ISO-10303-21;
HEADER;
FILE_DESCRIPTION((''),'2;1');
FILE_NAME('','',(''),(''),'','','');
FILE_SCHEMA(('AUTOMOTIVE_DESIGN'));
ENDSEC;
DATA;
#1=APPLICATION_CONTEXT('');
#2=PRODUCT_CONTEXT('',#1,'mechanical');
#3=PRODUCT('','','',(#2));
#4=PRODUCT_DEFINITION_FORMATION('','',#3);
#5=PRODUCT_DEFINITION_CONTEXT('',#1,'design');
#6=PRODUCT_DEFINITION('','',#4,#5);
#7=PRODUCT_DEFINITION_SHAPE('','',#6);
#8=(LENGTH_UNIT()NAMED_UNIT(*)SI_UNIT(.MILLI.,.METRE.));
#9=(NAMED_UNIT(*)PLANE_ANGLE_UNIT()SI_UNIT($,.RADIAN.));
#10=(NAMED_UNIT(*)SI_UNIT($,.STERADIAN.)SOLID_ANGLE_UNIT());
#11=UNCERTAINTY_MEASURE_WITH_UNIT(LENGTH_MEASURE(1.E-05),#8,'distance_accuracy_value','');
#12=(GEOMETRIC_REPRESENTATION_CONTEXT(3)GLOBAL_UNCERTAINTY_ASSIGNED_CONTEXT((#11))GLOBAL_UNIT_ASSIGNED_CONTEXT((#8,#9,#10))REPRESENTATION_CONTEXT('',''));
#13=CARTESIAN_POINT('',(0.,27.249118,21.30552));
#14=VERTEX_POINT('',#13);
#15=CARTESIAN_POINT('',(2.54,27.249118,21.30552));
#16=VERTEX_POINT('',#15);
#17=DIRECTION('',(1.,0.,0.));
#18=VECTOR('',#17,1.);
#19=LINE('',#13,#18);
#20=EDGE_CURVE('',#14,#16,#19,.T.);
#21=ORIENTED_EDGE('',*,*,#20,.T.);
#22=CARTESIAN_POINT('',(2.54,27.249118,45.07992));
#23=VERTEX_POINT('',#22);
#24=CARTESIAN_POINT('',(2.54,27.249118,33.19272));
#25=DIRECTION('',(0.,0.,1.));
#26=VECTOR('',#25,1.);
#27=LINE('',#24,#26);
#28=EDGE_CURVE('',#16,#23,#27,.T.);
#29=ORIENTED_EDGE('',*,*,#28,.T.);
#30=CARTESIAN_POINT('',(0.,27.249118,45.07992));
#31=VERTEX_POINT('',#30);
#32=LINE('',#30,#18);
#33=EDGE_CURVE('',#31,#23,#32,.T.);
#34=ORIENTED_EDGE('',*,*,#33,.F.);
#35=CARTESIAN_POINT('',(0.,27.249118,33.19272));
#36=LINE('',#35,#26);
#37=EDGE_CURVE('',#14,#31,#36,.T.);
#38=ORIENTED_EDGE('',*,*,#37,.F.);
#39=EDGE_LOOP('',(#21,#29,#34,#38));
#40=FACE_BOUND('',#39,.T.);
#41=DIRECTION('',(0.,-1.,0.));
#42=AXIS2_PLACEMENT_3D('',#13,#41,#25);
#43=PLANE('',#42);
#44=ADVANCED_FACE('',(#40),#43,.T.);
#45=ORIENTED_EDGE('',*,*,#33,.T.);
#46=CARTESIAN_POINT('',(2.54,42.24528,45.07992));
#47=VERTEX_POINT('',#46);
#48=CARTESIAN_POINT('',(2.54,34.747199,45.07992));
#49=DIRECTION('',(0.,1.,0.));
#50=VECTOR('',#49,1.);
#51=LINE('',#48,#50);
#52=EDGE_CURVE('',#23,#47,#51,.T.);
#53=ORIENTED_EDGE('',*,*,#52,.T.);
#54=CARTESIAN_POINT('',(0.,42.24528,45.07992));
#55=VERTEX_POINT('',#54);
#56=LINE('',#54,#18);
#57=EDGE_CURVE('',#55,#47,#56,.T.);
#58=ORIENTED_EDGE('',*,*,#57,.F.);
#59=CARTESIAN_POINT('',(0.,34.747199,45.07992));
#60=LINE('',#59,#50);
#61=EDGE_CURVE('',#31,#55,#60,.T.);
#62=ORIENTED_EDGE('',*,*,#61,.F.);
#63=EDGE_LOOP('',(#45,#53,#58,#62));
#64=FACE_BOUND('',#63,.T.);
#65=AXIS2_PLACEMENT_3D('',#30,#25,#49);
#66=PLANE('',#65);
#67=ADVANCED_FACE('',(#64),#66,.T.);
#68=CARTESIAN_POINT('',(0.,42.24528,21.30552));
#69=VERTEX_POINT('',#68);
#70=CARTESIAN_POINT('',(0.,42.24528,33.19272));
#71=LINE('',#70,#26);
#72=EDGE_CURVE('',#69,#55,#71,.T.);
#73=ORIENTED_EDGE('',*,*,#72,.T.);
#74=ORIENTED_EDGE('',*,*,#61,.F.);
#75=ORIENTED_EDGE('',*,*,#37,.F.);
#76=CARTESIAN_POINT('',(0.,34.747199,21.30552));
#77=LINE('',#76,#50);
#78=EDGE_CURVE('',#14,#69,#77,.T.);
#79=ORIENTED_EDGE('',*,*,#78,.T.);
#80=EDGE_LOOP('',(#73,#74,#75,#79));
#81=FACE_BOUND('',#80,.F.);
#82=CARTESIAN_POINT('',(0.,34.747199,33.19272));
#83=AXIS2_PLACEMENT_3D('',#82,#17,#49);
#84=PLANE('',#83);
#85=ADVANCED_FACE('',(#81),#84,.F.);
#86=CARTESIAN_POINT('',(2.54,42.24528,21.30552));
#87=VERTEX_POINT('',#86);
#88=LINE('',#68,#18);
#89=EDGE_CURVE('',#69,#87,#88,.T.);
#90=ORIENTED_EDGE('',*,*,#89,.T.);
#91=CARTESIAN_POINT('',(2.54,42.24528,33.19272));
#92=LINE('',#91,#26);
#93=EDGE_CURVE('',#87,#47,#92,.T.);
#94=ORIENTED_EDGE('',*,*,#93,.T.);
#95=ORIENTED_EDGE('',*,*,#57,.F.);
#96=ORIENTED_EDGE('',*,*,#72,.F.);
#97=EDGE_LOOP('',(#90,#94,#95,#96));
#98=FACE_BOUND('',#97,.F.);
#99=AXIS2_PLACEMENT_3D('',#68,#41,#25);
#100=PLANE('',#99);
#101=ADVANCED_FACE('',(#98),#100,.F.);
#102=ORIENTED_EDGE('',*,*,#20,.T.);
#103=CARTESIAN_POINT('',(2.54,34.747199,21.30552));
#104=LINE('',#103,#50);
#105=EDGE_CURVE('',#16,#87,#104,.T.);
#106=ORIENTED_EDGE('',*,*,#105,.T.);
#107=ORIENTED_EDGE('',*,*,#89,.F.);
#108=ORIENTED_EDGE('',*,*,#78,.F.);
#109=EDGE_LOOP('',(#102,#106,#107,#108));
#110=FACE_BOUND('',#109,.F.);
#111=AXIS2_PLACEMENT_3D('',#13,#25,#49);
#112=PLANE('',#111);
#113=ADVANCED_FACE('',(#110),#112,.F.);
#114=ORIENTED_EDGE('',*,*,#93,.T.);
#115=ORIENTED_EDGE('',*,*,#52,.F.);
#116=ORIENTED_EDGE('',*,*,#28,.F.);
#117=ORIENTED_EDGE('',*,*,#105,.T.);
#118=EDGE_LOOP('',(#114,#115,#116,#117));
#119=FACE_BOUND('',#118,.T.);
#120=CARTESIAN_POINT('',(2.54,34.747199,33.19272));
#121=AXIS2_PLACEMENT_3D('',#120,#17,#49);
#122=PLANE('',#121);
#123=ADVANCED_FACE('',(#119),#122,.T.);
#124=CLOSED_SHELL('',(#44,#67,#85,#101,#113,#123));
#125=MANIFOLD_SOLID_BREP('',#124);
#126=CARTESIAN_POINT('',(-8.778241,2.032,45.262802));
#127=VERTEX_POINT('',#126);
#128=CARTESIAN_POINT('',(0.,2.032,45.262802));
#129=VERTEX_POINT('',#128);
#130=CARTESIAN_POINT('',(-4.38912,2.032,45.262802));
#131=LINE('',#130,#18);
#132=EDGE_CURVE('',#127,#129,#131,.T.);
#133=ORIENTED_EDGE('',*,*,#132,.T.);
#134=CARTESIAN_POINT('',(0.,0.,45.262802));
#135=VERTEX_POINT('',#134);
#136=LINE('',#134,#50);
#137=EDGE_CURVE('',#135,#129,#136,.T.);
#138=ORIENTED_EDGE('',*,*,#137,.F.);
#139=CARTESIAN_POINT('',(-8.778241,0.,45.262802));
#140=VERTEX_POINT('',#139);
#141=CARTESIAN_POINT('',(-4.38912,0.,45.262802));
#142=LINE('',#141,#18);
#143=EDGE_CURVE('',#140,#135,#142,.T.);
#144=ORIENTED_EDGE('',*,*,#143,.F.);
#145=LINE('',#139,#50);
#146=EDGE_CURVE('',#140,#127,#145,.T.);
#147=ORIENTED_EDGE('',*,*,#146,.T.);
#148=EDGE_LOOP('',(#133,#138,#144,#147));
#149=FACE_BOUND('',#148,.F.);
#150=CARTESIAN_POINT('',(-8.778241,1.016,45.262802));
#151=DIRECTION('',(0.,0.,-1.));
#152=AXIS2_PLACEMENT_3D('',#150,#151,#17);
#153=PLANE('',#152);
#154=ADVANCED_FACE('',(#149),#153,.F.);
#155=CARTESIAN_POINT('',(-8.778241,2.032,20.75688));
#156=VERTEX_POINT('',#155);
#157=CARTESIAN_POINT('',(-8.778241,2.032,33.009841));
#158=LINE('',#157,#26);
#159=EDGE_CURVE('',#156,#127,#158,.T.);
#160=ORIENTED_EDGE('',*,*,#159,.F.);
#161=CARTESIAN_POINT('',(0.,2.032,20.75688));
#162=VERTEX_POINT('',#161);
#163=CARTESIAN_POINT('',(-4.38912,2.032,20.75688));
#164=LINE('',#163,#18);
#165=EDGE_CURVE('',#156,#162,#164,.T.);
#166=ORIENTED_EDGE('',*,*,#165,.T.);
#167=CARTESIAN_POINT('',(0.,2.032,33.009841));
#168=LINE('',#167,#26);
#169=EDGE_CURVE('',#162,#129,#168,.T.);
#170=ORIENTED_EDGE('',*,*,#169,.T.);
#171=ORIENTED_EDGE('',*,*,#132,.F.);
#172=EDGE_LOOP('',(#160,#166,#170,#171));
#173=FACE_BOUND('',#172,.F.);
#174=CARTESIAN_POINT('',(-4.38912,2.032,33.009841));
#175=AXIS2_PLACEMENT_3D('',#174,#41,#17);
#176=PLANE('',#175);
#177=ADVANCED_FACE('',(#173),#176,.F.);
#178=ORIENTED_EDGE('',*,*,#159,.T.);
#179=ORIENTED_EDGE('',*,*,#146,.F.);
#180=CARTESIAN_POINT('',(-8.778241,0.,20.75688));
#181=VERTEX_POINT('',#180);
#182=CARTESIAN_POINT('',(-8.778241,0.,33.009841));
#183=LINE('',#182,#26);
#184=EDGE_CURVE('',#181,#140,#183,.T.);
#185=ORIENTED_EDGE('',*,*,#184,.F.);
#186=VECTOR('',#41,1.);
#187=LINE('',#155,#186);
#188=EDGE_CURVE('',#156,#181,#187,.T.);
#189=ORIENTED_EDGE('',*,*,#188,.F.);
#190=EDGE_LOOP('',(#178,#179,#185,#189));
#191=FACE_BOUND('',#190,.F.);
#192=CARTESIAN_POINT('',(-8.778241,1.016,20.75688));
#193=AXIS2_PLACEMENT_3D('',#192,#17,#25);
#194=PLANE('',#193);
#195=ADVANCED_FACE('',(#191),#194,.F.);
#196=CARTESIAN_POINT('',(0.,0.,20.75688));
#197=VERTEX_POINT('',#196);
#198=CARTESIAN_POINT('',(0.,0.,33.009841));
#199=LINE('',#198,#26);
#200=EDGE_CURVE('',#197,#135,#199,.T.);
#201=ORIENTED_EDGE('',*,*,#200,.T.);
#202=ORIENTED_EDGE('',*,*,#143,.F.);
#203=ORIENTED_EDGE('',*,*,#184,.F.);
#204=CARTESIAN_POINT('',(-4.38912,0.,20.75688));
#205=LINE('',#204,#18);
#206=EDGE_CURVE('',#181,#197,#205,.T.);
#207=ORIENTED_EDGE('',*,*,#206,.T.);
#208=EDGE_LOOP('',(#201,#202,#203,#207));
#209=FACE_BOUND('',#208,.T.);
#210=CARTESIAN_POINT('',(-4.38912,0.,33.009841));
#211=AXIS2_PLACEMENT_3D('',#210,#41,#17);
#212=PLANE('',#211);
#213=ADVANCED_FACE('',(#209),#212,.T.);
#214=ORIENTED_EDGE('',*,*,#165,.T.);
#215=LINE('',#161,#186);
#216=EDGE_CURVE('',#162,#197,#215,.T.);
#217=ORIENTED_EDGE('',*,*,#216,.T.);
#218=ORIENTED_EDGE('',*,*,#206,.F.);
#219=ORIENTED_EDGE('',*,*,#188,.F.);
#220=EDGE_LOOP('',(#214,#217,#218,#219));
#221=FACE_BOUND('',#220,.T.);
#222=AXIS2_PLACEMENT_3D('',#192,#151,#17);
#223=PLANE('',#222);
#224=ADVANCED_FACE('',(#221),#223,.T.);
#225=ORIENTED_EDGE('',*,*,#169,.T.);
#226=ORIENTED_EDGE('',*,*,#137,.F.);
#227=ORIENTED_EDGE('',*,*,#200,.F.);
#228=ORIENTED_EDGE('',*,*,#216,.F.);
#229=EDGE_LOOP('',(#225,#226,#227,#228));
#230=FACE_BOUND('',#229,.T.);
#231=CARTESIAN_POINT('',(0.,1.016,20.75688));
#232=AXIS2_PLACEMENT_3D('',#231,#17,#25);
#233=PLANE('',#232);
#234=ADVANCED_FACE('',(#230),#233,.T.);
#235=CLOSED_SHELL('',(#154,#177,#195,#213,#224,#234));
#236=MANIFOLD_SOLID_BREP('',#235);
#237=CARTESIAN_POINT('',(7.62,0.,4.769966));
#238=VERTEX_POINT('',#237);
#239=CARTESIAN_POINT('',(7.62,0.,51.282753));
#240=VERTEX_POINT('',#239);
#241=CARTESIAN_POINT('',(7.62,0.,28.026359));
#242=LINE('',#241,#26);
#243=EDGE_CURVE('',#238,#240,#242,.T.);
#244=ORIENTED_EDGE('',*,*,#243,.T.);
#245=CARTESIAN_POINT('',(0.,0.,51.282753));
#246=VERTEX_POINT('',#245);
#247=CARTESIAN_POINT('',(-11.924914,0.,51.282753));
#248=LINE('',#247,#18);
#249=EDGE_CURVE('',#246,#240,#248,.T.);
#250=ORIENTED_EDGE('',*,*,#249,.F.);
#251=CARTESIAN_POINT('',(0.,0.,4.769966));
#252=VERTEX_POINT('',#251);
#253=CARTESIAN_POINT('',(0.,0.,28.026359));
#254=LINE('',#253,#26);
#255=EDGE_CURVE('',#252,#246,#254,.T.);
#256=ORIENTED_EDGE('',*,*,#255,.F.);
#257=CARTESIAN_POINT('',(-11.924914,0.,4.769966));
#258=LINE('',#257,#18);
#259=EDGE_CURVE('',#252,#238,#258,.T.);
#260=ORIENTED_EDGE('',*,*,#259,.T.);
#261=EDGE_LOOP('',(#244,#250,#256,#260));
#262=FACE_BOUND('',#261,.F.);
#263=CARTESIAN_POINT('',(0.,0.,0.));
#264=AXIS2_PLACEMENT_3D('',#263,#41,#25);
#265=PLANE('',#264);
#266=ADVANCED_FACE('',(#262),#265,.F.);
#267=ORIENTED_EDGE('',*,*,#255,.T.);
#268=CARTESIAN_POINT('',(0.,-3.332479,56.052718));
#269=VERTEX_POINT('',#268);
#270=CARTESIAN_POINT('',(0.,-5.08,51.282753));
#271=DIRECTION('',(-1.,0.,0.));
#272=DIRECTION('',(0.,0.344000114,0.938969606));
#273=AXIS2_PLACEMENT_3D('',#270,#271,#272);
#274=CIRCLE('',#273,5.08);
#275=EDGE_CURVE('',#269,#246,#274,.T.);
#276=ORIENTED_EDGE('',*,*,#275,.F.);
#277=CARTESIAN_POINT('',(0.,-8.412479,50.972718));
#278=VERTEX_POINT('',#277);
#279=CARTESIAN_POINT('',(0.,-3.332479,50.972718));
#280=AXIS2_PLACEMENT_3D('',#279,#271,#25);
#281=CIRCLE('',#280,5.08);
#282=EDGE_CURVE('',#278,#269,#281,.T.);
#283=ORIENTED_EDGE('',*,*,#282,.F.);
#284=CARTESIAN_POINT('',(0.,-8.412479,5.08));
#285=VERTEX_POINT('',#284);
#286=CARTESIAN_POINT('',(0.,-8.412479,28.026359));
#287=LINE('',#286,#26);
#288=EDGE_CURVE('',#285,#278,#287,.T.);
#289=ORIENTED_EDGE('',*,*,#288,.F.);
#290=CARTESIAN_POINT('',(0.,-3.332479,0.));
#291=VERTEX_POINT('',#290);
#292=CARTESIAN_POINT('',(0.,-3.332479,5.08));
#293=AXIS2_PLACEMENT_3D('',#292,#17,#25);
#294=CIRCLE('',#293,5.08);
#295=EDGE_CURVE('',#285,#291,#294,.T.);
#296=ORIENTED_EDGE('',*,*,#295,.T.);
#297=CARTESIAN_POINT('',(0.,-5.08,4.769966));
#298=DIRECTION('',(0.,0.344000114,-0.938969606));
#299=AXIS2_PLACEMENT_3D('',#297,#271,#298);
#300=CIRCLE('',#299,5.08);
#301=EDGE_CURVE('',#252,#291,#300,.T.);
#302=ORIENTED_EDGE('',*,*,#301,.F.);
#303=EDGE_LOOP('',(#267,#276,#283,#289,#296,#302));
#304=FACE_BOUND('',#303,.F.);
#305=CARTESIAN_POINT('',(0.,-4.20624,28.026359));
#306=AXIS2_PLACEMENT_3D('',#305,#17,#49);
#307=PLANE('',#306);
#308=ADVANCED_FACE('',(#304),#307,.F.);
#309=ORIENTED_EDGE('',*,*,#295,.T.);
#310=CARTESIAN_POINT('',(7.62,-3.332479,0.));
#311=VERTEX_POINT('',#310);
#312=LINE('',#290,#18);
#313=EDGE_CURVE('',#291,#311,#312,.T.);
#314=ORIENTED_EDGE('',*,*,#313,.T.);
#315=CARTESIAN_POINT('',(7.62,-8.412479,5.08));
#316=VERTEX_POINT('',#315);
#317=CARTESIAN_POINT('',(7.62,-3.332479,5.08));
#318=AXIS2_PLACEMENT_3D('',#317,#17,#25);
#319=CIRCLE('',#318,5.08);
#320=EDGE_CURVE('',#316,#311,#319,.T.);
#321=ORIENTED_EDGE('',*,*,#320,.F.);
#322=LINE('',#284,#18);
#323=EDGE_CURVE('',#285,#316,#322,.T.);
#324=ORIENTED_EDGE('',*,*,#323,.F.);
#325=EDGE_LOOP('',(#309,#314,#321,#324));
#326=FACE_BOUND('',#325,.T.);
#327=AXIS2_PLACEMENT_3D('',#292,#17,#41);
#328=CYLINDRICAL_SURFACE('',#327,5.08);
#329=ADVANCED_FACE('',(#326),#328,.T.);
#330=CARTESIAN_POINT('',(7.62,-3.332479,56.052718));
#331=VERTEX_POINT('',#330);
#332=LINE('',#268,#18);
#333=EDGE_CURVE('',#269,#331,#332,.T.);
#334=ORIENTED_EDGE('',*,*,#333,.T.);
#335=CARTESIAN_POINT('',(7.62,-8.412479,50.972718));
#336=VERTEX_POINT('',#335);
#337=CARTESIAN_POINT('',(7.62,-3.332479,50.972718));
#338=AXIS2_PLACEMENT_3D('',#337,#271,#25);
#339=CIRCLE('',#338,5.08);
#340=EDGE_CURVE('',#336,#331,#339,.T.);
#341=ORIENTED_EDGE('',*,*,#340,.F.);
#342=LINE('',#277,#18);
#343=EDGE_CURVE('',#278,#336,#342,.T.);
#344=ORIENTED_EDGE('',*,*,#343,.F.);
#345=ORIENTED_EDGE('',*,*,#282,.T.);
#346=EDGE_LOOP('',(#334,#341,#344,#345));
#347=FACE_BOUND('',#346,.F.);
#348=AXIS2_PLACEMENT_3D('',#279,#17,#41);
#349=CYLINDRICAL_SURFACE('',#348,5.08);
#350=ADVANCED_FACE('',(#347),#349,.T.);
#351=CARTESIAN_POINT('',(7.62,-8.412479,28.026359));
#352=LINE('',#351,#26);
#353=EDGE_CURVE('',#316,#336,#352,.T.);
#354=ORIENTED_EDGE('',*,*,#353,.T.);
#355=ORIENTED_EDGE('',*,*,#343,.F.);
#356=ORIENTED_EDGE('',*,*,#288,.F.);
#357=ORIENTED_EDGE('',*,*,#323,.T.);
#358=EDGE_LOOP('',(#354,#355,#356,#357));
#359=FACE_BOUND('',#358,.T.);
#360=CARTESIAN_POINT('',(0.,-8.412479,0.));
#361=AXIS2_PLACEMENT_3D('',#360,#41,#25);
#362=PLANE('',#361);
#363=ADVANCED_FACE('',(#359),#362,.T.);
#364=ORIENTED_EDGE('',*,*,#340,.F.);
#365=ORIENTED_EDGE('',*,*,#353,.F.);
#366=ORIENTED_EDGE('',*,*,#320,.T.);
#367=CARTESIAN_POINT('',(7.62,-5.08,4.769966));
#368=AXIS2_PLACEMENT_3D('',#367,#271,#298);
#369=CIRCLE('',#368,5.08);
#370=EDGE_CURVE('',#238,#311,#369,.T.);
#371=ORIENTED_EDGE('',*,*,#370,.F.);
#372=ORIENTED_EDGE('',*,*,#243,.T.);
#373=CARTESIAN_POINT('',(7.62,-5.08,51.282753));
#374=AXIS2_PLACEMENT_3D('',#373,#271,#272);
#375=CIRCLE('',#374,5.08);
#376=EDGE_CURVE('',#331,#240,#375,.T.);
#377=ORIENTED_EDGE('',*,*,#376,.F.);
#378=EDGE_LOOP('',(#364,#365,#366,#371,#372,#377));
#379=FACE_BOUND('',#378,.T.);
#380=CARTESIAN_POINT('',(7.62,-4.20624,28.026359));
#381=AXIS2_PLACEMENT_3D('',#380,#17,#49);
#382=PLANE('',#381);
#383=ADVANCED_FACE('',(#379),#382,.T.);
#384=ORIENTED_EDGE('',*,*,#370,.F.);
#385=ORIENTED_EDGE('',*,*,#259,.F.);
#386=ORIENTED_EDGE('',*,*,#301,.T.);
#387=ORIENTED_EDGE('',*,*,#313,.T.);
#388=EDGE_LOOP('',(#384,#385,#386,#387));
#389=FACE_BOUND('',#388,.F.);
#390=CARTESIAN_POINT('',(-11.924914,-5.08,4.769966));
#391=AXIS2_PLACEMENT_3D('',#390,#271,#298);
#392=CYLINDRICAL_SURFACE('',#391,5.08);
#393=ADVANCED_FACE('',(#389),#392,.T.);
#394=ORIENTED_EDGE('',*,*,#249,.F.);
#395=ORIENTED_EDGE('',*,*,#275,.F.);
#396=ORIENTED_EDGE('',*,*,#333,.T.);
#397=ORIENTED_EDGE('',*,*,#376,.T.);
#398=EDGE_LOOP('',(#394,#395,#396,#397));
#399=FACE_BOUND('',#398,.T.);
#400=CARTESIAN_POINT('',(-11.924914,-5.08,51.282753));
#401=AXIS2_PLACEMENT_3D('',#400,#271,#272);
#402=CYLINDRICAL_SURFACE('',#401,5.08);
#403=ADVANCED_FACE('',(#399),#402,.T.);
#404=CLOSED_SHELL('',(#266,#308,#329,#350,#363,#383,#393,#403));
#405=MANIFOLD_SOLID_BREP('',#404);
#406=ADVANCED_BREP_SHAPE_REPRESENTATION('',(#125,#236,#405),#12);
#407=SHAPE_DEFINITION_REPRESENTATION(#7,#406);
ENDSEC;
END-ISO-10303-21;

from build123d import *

# Parameters (mm, degrees)
F0_W        = 8.412479423
F0_H        = 56.0527183115
F1_DEPTH    = 7.62
F2_R        = 5.08
F3_T1_DEPTH = 31.4698280041
F4_R        = 5.08
F5_T1_DEPTH = 31.4698280041
F6_W        = 14.9961616844
F6_H        = 23.7744003534
F7_DEPTH    = 2.54
F8_W        = 8.7782405317
F8_H        = 24.5059225708
F9_DEPTH    = 1.016
F10_DEPTH   = 1.016


# Not quite as in the source:
# - a fillet or chamfer that OpenCascade refuses, or shapes differently, is made with other operations: its cross-section is extruded or revolved along the edge and cut away or added


with BuildPart() as f1:
    # F0 (on Right) → F1 (new body)
    with BuildSketch(Plane.YZ):
        with Locations((-4.2062397115, 28.0263591558)):
            Rectangle(F0_W, F0_H)
    extrude(amount=F1_DEPTH)

    # F2
    f2_edges = [f1.edges().sort_by_distance(p)[0] for p in [
        (3.81, -8.412479, 56.052718),
    ]]
    fillet(f2_edges, radius=F2_R)

    # F3: fillet of radius 5.08 on 1 edges, made by hand

    # F3_s2 → F3_t1 (cut)
    with BuildSketch(Plane.YZ.offset(-11.924914002)):
        with BuildLine():
            ThreePointArc((-3.332479423, 56.0527183115), (-0.9156390327, 54.1921336989), (0, 51.2827527107))
            Line((0, 51.2827527107), (0, 56.0527183115))
            Line((0, 56.0527183115), (-3.332479423, 56.0527183115))
        make_face()
    extrude(amount=F3_T1_DEPTH, mode=Mode.SUBTRACT)

    # F4
    f4_edges = [f1.edges().sort_by_distance(p)[0] for p in [
        (3.81, -8.412479, 0),
    ]]
    fillet(f4_edges, radius=F4_R)

    # F5: fillet of radius 5.08 on 1 edges, made by hand

    # F5_s2 → F5_t1 (cut)
    with BuildSketch(Plane.YZ.offset(-11.924914002)):
        with BuildLine():
            ThreePointArc((-3.332479423, 0), (-0.9156390327, 1.8605846126), (0, 4.7699656008))
            Line((0, 4.7699656008), (0, 0))
            Line((0, 0), (-3.332479423, 0))
        make_face()
    extrude(amount=F5_T1_DEPTH, mode=Mode.SUBTRACT)


with BuildPart() as f7:
    # F6 (on Right) → F7 (new body)
    with BuildSketch(Plane.YZ):
        with Locations((34.7471991554, 33.1927202642)):
            Rectangle(F6_W, F6_H)
    extrude(amount=F7_DEPTH)


with BuildPart() as f9:
    # F8 (on Front) → F9 (new body)
    with BuildSketch(Plane.XZ):
        with Locations((-4.3891202658, 33.0098411068)):
            Rectangle(F8_W, F8_H)
    extrude(amount=-F9_DEPTH)

    # F10 (add): a face of the model
    f10_faces = [f9.faces().sort_by_distance(p)[0] for p in [
        (-4.3891202658, 1.016, 33.0098411068),
    ]]
    extrude(f10_faces, amount=F10_DEPTH)


solid = Compound([f1.part, f7.part, f9.part])
